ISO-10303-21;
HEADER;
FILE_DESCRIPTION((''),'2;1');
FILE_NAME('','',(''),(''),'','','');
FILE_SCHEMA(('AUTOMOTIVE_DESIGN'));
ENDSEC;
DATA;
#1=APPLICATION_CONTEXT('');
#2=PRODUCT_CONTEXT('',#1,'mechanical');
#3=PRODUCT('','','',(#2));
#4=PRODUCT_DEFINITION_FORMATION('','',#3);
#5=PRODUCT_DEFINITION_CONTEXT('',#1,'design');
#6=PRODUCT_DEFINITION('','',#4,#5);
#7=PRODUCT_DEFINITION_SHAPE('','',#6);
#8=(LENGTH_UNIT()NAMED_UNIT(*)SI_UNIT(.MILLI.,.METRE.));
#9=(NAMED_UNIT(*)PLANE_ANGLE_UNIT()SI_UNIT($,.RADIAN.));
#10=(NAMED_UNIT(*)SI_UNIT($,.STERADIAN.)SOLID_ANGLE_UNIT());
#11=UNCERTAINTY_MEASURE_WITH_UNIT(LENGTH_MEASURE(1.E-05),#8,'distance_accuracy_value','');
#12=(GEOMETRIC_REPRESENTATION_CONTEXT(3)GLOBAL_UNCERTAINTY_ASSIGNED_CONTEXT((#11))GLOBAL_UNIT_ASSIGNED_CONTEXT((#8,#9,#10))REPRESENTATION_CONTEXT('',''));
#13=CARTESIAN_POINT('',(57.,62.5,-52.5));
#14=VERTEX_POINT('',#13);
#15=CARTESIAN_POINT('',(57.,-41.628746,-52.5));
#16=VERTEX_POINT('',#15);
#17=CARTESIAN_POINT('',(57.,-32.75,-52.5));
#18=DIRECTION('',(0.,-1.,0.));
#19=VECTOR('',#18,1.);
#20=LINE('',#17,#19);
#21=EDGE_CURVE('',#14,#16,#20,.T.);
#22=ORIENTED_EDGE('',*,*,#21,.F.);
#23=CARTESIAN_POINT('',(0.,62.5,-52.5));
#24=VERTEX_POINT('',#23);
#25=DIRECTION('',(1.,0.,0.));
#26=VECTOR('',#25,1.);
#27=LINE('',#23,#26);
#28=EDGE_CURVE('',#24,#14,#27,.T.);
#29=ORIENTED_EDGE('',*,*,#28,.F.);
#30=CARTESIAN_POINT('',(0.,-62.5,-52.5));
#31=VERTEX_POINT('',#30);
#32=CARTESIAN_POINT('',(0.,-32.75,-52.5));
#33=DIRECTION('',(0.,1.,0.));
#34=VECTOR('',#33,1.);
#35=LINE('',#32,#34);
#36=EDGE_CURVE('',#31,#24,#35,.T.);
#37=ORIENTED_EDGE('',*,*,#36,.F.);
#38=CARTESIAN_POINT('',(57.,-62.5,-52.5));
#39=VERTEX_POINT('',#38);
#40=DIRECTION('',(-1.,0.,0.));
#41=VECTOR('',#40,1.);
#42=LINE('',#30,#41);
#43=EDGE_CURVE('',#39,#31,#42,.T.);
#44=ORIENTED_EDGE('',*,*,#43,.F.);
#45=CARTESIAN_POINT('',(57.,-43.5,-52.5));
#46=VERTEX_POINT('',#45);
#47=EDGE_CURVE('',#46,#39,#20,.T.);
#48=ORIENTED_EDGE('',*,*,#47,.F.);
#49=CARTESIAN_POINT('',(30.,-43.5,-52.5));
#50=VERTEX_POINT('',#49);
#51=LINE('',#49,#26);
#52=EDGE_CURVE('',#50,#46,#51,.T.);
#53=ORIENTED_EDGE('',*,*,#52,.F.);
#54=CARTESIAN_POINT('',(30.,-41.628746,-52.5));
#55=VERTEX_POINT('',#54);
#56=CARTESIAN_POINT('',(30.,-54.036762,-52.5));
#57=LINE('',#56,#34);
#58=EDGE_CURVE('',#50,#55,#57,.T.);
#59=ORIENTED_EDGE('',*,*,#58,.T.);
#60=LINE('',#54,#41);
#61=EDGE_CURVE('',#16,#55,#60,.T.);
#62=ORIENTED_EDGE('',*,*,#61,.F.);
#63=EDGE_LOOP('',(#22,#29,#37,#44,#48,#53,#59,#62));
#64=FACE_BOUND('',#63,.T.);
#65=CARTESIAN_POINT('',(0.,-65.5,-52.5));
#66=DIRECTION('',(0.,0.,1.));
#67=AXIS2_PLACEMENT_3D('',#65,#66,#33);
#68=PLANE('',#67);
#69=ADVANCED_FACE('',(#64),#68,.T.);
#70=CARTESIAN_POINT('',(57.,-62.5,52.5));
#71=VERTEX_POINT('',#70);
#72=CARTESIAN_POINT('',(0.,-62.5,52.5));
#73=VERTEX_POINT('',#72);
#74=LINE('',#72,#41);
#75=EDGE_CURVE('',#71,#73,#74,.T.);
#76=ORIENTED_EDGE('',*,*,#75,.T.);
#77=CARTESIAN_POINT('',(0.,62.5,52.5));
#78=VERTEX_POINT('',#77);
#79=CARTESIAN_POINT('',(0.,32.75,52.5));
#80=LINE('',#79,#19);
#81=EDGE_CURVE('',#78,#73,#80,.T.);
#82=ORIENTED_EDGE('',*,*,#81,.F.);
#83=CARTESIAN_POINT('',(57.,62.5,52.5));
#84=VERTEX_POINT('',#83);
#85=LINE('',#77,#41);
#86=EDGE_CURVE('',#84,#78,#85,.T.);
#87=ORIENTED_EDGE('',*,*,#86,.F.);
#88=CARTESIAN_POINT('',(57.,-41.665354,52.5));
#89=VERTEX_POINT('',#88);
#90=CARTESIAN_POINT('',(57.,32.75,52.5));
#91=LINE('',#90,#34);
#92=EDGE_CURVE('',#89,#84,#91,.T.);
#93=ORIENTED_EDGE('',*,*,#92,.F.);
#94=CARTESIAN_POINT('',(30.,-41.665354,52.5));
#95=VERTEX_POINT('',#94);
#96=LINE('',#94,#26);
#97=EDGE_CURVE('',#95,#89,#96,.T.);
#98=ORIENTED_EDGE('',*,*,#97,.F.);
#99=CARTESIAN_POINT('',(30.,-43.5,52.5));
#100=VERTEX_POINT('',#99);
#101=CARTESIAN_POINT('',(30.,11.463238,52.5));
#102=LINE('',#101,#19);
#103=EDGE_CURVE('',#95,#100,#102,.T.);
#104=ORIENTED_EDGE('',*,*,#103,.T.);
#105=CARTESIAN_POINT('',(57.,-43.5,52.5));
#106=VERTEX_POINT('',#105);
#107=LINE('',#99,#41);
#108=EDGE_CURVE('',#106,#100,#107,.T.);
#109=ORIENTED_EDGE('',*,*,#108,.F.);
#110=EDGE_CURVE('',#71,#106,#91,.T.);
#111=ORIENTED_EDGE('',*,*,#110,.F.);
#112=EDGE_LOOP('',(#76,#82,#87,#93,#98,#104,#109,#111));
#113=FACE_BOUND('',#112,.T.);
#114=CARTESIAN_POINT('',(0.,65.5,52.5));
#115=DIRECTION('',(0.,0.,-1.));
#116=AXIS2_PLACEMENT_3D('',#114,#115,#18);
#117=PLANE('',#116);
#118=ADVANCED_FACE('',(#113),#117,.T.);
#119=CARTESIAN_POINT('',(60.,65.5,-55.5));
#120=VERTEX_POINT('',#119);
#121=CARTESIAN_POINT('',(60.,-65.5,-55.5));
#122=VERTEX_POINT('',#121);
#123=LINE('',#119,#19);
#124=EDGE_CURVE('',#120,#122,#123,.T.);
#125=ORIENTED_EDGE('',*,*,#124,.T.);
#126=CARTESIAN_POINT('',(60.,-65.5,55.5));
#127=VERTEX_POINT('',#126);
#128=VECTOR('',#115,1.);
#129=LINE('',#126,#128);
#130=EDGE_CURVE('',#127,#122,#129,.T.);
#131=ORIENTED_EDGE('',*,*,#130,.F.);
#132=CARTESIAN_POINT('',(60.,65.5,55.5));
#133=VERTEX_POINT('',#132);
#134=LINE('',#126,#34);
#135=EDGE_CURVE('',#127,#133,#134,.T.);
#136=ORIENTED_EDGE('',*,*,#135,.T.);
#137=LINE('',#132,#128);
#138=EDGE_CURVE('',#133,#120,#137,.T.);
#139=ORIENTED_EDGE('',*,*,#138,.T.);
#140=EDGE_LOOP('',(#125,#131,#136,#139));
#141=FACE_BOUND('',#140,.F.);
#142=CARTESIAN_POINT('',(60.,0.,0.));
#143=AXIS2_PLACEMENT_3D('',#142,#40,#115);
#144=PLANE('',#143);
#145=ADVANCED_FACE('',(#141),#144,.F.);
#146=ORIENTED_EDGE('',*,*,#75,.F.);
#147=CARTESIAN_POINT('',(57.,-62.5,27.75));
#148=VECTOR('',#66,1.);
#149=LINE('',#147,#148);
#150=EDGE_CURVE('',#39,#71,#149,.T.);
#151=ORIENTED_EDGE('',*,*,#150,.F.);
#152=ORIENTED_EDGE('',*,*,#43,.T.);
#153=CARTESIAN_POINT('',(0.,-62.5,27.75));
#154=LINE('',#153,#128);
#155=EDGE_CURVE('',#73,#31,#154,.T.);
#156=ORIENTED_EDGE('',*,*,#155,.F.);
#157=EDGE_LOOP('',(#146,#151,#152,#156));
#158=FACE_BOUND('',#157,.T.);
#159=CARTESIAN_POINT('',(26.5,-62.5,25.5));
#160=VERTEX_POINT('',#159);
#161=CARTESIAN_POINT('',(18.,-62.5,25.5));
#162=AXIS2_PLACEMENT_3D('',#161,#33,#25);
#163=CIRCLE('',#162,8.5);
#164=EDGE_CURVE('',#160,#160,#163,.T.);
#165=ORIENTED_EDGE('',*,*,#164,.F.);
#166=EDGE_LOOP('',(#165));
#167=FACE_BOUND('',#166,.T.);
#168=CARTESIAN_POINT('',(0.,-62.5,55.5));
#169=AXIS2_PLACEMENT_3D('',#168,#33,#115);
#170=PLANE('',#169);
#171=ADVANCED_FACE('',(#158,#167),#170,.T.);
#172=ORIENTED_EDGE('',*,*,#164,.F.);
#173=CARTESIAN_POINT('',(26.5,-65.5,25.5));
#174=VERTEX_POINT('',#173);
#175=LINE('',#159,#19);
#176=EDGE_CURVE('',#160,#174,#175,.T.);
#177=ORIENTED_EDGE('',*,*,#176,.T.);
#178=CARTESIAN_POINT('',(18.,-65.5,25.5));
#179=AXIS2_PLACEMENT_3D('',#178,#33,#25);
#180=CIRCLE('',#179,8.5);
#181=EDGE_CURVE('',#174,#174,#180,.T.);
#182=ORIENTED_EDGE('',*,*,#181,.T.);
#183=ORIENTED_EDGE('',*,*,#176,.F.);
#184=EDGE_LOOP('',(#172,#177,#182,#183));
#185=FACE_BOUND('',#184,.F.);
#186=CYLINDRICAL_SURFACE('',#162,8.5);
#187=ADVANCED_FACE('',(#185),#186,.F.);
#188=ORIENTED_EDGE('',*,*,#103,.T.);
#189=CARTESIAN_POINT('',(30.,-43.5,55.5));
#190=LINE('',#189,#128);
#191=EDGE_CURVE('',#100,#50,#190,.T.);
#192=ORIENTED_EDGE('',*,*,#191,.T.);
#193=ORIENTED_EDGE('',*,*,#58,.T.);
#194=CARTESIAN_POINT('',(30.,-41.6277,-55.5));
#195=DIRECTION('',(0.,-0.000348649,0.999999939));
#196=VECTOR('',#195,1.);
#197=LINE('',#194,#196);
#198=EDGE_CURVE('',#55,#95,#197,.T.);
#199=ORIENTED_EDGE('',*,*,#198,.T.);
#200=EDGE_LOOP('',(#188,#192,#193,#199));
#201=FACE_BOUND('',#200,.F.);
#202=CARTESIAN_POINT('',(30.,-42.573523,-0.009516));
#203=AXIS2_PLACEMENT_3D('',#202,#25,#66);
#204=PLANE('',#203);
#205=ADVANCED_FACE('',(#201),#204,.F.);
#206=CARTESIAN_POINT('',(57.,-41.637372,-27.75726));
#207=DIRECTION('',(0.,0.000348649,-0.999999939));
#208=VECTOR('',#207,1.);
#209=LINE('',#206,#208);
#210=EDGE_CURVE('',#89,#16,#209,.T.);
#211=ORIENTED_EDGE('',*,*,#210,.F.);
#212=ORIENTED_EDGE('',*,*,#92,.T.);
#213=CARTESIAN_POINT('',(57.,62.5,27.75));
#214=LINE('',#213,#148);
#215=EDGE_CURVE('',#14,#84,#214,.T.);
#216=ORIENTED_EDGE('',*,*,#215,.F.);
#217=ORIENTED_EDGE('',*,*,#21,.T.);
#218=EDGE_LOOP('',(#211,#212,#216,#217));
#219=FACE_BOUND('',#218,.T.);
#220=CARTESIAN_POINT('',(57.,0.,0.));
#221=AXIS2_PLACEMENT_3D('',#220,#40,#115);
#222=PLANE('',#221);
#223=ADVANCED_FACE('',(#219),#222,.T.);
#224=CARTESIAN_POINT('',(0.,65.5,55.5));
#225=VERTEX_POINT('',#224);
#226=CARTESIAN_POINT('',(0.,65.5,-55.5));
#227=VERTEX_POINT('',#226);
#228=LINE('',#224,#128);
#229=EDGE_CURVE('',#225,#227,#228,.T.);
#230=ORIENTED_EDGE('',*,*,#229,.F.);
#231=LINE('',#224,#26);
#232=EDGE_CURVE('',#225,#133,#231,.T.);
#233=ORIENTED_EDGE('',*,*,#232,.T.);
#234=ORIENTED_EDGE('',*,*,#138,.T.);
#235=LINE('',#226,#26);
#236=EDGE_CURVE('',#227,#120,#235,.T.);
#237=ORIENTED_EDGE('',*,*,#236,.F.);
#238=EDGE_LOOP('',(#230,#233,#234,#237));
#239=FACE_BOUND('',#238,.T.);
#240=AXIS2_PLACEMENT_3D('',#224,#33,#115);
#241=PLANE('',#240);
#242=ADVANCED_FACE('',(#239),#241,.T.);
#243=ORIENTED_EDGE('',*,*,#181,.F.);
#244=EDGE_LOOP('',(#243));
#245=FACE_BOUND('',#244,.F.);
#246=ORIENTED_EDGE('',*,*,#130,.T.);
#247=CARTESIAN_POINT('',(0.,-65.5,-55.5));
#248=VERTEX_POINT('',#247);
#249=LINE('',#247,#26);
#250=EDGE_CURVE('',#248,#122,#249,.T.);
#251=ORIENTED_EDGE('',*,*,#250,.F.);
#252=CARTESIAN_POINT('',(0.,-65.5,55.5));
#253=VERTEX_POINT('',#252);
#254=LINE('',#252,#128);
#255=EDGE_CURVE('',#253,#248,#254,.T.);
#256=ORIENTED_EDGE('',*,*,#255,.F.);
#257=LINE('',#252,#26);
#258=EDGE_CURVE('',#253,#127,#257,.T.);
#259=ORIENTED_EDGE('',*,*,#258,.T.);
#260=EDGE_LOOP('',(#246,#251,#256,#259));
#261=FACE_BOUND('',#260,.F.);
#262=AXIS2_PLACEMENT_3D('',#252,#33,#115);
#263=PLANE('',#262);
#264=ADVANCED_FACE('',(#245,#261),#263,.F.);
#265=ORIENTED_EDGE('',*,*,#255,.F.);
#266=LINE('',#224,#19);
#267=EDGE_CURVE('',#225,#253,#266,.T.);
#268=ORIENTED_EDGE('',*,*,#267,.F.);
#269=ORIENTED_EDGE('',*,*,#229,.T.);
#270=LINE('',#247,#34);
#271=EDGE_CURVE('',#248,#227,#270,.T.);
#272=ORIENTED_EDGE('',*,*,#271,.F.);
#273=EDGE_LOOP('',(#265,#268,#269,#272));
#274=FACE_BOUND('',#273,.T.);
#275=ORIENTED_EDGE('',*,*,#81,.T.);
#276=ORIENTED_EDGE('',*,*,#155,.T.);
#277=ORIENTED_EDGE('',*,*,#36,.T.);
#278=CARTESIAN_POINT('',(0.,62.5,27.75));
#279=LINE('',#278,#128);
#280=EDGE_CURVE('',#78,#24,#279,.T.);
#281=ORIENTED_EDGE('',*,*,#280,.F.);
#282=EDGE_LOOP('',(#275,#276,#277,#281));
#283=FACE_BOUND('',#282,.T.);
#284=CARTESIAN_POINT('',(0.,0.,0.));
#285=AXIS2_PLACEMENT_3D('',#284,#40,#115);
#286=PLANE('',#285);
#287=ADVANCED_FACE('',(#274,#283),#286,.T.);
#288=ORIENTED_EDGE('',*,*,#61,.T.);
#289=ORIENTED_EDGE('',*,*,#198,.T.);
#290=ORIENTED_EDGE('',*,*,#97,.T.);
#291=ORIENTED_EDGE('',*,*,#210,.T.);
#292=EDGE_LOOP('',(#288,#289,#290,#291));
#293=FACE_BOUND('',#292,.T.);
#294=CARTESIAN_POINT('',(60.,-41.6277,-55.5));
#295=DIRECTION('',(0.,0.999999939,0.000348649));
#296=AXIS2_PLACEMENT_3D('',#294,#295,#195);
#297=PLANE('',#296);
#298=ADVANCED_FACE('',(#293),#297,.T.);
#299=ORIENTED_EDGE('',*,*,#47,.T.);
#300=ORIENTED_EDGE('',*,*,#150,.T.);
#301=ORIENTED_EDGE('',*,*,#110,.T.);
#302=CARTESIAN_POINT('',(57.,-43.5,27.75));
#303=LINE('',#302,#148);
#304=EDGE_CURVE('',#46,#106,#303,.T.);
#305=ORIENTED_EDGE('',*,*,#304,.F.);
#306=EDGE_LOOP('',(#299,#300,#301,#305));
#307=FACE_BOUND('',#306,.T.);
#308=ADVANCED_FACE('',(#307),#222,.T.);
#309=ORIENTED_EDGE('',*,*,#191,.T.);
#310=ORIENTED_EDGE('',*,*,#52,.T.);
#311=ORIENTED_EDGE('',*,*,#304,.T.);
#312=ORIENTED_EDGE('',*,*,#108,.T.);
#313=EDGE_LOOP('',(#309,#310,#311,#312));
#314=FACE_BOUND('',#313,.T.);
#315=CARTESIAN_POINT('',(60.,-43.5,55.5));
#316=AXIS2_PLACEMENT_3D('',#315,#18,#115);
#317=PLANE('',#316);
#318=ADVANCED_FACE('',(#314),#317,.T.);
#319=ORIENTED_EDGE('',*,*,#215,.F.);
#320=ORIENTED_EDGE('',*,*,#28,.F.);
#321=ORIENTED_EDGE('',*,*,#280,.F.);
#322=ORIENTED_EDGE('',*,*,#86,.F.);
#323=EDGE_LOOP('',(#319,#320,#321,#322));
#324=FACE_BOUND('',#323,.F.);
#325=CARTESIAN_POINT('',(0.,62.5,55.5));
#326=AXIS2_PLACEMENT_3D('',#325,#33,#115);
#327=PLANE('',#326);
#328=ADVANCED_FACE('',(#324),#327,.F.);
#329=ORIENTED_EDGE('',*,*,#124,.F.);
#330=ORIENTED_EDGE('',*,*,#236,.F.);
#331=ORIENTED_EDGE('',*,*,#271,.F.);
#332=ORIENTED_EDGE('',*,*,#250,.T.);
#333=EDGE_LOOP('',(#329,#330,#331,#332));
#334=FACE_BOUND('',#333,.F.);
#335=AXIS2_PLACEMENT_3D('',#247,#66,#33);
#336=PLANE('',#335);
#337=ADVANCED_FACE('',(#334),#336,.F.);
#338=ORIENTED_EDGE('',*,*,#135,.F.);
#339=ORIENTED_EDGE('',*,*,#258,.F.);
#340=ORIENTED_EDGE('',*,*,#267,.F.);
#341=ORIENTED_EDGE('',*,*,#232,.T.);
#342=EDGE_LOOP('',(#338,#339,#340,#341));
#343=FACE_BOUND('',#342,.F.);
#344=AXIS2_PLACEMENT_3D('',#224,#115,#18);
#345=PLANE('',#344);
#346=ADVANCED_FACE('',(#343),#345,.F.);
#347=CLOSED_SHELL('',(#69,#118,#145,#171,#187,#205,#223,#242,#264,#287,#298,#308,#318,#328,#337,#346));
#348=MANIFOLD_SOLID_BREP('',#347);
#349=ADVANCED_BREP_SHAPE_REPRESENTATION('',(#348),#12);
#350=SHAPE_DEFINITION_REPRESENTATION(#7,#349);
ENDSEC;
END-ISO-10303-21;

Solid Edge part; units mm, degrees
sketch "Sketch1" plane through (0, 0, 0) normal (1, 0, 0) x (0, 1, 0)
  line L0 (65.5, 55.5) -> (65.5, -55.5)
  line L1 (-65.5, -55.5) -> (65.5, -55.5)
  line L2 (-65.5, 55.5) -> (-65.5, -55.5)
  line L3 (65.5, 55.5) -> (-65.5, 55.5)
extrude "Protrusion1" add sketch "Sketch1" along normal blind 60
shell "Thinwall_3" thickness 3 removed faces 1 at (0, 42.3567, 38.11)
sketch "Sketch2" plane through (60, 0, 0) normal (1, 0, 0) x (0, 0, 1)
  line L0 (-55.5, 43.5) -> (-55.5, 41.6664)
  line L1 (55.5, 43.5) -> (-55.5, 43.5)
  line L2 (55.5, 41.6664) -> (55.5, 43.5)
  line L3 (-55.5, 41.6277) -> (55.5, 41.6664)
extrude "ExtrudedCutout_2" add sketch "Sketch2" against normal blind 30 material side at (60, -42.5832, -55.55)
sketch "Sketch3" plane through (28.5, -62.5, 0) normal (0, 1, 0) x (1, 0, 0)
  circle A0 centre (-10.5, -25.5) radius 8.5
extrude "ExtrudedCutout_4" cut sketch "Sketch3" along normal mid plane 13.736
